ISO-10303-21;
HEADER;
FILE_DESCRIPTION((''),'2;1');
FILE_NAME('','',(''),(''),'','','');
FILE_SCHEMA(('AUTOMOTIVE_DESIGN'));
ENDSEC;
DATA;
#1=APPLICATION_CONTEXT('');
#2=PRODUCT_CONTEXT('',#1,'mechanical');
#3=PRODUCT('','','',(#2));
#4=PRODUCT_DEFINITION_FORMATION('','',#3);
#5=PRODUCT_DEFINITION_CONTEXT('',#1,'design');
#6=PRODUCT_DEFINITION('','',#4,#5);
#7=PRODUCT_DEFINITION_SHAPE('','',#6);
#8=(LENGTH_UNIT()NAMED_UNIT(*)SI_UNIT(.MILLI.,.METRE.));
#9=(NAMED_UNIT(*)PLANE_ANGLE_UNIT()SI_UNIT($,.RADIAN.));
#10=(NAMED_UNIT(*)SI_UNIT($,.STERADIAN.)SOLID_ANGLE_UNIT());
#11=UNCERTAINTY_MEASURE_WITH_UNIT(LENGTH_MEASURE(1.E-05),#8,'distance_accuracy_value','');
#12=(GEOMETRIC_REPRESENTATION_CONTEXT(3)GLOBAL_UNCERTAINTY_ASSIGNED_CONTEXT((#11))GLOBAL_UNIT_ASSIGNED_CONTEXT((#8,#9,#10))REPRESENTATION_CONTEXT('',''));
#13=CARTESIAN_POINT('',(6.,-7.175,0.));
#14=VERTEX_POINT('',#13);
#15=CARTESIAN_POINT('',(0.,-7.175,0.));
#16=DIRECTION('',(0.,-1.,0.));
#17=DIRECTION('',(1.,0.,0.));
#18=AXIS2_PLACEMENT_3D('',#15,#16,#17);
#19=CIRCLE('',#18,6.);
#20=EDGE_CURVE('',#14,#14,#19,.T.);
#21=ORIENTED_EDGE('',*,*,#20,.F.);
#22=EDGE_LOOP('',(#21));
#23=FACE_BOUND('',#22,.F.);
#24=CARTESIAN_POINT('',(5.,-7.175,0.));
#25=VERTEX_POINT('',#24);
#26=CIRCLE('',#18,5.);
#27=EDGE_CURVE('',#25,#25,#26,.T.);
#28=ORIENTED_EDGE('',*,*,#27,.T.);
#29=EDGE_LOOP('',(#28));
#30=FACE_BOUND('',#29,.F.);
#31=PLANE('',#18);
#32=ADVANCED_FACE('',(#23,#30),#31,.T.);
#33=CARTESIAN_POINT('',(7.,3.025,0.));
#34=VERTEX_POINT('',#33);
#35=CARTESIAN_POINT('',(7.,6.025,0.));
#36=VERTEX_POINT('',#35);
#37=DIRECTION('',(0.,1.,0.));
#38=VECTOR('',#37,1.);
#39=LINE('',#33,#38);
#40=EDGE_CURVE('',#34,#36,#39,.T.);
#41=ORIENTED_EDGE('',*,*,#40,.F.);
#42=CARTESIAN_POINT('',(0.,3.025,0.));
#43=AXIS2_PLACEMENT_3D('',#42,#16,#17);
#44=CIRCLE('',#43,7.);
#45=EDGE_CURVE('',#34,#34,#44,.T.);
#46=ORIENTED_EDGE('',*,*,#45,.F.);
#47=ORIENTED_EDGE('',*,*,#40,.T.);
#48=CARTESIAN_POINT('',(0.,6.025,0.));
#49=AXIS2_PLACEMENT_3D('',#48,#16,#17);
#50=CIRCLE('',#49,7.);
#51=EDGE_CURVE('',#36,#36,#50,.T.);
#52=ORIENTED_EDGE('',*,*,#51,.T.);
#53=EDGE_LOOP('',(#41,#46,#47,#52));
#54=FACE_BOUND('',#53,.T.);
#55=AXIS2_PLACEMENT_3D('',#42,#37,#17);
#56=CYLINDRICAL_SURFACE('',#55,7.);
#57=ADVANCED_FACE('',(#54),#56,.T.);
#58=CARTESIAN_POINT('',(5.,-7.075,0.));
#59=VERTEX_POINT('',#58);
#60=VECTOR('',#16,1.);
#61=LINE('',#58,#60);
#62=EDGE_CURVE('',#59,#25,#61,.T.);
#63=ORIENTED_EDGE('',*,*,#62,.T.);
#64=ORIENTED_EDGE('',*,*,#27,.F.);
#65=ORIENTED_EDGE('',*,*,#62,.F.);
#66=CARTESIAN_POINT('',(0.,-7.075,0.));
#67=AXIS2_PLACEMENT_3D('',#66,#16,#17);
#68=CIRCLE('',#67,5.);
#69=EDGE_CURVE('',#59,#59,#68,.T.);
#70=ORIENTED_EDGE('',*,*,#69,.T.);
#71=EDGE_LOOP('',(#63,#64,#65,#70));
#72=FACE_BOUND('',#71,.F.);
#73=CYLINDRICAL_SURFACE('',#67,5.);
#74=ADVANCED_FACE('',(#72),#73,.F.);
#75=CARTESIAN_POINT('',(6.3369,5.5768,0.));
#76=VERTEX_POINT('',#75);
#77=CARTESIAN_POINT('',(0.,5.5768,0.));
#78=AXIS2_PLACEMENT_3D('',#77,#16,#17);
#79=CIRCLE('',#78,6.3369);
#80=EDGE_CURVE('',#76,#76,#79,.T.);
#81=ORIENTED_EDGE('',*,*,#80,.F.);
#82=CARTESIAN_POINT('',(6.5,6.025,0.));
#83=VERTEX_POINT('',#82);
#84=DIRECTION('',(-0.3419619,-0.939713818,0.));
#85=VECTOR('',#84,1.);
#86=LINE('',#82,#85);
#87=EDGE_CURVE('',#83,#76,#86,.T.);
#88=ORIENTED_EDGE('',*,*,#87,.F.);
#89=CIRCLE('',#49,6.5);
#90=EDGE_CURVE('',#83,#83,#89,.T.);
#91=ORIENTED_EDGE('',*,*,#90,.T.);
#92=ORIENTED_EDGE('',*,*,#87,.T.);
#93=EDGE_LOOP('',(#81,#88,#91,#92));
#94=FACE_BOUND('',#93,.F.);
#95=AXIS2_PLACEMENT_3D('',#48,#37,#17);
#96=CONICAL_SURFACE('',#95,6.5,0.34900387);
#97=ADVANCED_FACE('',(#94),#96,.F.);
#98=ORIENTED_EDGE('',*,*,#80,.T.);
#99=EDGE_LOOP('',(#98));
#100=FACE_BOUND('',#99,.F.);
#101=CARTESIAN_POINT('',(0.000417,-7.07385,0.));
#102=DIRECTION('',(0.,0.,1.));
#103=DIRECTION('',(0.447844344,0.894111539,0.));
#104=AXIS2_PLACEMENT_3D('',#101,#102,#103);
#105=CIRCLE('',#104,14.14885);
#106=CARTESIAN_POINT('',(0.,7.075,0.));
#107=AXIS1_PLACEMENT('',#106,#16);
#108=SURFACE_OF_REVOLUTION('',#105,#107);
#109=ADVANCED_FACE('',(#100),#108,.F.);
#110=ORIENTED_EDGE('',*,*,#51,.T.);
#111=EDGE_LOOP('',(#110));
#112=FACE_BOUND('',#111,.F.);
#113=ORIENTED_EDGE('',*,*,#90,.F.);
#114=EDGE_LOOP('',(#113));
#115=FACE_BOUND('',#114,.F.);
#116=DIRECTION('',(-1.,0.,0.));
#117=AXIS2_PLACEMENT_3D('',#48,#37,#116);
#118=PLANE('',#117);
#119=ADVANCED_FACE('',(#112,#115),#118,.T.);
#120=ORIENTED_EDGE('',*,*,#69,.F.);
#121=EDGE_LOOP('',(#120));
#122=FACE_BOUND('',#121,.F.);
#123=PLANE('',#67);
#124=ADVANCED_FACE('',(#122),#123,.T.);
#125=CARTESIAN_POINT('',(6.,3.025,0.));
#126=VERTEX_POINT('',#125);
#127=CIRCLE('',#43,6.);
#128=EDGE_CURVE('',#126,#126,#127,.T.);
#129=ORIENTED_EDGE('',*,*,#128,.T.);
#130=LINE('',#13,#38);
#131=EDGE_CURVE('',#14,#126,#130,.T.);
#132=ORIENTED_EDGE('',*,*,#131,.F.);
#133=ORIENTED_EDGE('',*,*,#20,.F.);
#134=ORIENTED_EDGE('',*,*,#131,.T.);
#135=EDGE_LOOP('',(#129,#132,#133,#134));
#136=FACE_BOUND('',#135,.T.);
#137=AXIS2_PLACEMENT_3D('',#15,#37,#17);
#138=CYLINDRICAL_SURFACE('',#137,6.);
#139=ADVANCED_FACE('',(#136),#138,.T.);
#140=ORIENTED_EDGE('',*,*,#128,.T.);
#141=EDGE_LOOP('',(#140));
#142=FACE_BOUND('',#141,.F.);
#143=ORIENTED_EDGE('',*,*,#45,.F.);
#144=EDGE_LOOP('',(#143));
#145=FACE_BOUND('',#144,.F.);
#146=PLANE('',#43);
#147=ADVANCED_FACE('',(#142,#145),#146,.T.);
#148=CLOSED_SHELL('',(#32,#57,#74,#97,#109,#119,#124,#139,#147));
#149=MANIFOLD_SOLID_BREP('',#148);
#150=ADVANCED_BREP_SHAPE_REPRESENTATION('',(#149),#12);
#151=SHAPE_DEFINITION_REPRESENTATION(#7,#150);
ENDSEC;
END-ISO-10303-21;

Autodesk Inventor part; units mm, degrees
ref_plane "YZ Plane" through (0, 0, 0) normal (1, 0, 0) x (0, 1, 0)
ref_plane "XZ Plane" through (0, 0, 0) normal (0, 1, 0) x (-1, 0, 0)
ref_plane "XY Plane" through (0, 0, 0) normal (0, 0, 1) x (1, 0, 0)
sketch "Sketch1" plane through (0, 0, 0) normal (0, 0, 1) x (1, 0, 0)
  line L0 (0, 7.075) -> (0, -7.075)
  line L1 (6, -7.175) -> (6, 3.025)
  line L2 (6, 3.025) -> (7, 3.025)
  line L3 (7, 3.025) -> (7, 6.025)
  line L4 (7, 6.025) -> (6.5, 6.025)
  line L5 (6.5, 6.025) -> (6.3369, 5.5768)
  arc A0 (6.3369, 5.5768) -> (0, 7.075) centre (0, -7.075) ccw
  line L6 (0, -11.675) -> (6, -11.675)
  line L7 (0, -7.075) -> (5, -7.075)
  line L8 (5, -7.075) -> (5, -7.175)
  line L9 (5, -7.175) -> (6, -7.175)
  point P0 (0, 0)
  point P1 (0, 0)
  dimension "d2" = 12
  dimension "d3" = 14
  dimension "d4" = 3
  dimension "d5" = 0.5
  dimension "d6" = 110
  dimension "d11" = 10
  dimension "d12" = 4.5
  dimension "d13" = 0.1
  dimension "d14" = 18.75
  dimension "d15" = 10.2
revolve "Revolution1" add sketch "Sketch1" angle 360 about axis through (0, 7.075, 0) along (0, -1, 0)
surface revolve "RevolutionSrf1" sketch "Sketch1" angle 360 about axis through (0, 7.075, 0) along (0, -1, 0) shown yes curves L6
thread "Thread1" size "M12x0.5" class "6g" standard "ANSI Metric M Profile" full length
properties part number "Lens_M12_1.70mm-f2.8" material "ABS Plastic"
